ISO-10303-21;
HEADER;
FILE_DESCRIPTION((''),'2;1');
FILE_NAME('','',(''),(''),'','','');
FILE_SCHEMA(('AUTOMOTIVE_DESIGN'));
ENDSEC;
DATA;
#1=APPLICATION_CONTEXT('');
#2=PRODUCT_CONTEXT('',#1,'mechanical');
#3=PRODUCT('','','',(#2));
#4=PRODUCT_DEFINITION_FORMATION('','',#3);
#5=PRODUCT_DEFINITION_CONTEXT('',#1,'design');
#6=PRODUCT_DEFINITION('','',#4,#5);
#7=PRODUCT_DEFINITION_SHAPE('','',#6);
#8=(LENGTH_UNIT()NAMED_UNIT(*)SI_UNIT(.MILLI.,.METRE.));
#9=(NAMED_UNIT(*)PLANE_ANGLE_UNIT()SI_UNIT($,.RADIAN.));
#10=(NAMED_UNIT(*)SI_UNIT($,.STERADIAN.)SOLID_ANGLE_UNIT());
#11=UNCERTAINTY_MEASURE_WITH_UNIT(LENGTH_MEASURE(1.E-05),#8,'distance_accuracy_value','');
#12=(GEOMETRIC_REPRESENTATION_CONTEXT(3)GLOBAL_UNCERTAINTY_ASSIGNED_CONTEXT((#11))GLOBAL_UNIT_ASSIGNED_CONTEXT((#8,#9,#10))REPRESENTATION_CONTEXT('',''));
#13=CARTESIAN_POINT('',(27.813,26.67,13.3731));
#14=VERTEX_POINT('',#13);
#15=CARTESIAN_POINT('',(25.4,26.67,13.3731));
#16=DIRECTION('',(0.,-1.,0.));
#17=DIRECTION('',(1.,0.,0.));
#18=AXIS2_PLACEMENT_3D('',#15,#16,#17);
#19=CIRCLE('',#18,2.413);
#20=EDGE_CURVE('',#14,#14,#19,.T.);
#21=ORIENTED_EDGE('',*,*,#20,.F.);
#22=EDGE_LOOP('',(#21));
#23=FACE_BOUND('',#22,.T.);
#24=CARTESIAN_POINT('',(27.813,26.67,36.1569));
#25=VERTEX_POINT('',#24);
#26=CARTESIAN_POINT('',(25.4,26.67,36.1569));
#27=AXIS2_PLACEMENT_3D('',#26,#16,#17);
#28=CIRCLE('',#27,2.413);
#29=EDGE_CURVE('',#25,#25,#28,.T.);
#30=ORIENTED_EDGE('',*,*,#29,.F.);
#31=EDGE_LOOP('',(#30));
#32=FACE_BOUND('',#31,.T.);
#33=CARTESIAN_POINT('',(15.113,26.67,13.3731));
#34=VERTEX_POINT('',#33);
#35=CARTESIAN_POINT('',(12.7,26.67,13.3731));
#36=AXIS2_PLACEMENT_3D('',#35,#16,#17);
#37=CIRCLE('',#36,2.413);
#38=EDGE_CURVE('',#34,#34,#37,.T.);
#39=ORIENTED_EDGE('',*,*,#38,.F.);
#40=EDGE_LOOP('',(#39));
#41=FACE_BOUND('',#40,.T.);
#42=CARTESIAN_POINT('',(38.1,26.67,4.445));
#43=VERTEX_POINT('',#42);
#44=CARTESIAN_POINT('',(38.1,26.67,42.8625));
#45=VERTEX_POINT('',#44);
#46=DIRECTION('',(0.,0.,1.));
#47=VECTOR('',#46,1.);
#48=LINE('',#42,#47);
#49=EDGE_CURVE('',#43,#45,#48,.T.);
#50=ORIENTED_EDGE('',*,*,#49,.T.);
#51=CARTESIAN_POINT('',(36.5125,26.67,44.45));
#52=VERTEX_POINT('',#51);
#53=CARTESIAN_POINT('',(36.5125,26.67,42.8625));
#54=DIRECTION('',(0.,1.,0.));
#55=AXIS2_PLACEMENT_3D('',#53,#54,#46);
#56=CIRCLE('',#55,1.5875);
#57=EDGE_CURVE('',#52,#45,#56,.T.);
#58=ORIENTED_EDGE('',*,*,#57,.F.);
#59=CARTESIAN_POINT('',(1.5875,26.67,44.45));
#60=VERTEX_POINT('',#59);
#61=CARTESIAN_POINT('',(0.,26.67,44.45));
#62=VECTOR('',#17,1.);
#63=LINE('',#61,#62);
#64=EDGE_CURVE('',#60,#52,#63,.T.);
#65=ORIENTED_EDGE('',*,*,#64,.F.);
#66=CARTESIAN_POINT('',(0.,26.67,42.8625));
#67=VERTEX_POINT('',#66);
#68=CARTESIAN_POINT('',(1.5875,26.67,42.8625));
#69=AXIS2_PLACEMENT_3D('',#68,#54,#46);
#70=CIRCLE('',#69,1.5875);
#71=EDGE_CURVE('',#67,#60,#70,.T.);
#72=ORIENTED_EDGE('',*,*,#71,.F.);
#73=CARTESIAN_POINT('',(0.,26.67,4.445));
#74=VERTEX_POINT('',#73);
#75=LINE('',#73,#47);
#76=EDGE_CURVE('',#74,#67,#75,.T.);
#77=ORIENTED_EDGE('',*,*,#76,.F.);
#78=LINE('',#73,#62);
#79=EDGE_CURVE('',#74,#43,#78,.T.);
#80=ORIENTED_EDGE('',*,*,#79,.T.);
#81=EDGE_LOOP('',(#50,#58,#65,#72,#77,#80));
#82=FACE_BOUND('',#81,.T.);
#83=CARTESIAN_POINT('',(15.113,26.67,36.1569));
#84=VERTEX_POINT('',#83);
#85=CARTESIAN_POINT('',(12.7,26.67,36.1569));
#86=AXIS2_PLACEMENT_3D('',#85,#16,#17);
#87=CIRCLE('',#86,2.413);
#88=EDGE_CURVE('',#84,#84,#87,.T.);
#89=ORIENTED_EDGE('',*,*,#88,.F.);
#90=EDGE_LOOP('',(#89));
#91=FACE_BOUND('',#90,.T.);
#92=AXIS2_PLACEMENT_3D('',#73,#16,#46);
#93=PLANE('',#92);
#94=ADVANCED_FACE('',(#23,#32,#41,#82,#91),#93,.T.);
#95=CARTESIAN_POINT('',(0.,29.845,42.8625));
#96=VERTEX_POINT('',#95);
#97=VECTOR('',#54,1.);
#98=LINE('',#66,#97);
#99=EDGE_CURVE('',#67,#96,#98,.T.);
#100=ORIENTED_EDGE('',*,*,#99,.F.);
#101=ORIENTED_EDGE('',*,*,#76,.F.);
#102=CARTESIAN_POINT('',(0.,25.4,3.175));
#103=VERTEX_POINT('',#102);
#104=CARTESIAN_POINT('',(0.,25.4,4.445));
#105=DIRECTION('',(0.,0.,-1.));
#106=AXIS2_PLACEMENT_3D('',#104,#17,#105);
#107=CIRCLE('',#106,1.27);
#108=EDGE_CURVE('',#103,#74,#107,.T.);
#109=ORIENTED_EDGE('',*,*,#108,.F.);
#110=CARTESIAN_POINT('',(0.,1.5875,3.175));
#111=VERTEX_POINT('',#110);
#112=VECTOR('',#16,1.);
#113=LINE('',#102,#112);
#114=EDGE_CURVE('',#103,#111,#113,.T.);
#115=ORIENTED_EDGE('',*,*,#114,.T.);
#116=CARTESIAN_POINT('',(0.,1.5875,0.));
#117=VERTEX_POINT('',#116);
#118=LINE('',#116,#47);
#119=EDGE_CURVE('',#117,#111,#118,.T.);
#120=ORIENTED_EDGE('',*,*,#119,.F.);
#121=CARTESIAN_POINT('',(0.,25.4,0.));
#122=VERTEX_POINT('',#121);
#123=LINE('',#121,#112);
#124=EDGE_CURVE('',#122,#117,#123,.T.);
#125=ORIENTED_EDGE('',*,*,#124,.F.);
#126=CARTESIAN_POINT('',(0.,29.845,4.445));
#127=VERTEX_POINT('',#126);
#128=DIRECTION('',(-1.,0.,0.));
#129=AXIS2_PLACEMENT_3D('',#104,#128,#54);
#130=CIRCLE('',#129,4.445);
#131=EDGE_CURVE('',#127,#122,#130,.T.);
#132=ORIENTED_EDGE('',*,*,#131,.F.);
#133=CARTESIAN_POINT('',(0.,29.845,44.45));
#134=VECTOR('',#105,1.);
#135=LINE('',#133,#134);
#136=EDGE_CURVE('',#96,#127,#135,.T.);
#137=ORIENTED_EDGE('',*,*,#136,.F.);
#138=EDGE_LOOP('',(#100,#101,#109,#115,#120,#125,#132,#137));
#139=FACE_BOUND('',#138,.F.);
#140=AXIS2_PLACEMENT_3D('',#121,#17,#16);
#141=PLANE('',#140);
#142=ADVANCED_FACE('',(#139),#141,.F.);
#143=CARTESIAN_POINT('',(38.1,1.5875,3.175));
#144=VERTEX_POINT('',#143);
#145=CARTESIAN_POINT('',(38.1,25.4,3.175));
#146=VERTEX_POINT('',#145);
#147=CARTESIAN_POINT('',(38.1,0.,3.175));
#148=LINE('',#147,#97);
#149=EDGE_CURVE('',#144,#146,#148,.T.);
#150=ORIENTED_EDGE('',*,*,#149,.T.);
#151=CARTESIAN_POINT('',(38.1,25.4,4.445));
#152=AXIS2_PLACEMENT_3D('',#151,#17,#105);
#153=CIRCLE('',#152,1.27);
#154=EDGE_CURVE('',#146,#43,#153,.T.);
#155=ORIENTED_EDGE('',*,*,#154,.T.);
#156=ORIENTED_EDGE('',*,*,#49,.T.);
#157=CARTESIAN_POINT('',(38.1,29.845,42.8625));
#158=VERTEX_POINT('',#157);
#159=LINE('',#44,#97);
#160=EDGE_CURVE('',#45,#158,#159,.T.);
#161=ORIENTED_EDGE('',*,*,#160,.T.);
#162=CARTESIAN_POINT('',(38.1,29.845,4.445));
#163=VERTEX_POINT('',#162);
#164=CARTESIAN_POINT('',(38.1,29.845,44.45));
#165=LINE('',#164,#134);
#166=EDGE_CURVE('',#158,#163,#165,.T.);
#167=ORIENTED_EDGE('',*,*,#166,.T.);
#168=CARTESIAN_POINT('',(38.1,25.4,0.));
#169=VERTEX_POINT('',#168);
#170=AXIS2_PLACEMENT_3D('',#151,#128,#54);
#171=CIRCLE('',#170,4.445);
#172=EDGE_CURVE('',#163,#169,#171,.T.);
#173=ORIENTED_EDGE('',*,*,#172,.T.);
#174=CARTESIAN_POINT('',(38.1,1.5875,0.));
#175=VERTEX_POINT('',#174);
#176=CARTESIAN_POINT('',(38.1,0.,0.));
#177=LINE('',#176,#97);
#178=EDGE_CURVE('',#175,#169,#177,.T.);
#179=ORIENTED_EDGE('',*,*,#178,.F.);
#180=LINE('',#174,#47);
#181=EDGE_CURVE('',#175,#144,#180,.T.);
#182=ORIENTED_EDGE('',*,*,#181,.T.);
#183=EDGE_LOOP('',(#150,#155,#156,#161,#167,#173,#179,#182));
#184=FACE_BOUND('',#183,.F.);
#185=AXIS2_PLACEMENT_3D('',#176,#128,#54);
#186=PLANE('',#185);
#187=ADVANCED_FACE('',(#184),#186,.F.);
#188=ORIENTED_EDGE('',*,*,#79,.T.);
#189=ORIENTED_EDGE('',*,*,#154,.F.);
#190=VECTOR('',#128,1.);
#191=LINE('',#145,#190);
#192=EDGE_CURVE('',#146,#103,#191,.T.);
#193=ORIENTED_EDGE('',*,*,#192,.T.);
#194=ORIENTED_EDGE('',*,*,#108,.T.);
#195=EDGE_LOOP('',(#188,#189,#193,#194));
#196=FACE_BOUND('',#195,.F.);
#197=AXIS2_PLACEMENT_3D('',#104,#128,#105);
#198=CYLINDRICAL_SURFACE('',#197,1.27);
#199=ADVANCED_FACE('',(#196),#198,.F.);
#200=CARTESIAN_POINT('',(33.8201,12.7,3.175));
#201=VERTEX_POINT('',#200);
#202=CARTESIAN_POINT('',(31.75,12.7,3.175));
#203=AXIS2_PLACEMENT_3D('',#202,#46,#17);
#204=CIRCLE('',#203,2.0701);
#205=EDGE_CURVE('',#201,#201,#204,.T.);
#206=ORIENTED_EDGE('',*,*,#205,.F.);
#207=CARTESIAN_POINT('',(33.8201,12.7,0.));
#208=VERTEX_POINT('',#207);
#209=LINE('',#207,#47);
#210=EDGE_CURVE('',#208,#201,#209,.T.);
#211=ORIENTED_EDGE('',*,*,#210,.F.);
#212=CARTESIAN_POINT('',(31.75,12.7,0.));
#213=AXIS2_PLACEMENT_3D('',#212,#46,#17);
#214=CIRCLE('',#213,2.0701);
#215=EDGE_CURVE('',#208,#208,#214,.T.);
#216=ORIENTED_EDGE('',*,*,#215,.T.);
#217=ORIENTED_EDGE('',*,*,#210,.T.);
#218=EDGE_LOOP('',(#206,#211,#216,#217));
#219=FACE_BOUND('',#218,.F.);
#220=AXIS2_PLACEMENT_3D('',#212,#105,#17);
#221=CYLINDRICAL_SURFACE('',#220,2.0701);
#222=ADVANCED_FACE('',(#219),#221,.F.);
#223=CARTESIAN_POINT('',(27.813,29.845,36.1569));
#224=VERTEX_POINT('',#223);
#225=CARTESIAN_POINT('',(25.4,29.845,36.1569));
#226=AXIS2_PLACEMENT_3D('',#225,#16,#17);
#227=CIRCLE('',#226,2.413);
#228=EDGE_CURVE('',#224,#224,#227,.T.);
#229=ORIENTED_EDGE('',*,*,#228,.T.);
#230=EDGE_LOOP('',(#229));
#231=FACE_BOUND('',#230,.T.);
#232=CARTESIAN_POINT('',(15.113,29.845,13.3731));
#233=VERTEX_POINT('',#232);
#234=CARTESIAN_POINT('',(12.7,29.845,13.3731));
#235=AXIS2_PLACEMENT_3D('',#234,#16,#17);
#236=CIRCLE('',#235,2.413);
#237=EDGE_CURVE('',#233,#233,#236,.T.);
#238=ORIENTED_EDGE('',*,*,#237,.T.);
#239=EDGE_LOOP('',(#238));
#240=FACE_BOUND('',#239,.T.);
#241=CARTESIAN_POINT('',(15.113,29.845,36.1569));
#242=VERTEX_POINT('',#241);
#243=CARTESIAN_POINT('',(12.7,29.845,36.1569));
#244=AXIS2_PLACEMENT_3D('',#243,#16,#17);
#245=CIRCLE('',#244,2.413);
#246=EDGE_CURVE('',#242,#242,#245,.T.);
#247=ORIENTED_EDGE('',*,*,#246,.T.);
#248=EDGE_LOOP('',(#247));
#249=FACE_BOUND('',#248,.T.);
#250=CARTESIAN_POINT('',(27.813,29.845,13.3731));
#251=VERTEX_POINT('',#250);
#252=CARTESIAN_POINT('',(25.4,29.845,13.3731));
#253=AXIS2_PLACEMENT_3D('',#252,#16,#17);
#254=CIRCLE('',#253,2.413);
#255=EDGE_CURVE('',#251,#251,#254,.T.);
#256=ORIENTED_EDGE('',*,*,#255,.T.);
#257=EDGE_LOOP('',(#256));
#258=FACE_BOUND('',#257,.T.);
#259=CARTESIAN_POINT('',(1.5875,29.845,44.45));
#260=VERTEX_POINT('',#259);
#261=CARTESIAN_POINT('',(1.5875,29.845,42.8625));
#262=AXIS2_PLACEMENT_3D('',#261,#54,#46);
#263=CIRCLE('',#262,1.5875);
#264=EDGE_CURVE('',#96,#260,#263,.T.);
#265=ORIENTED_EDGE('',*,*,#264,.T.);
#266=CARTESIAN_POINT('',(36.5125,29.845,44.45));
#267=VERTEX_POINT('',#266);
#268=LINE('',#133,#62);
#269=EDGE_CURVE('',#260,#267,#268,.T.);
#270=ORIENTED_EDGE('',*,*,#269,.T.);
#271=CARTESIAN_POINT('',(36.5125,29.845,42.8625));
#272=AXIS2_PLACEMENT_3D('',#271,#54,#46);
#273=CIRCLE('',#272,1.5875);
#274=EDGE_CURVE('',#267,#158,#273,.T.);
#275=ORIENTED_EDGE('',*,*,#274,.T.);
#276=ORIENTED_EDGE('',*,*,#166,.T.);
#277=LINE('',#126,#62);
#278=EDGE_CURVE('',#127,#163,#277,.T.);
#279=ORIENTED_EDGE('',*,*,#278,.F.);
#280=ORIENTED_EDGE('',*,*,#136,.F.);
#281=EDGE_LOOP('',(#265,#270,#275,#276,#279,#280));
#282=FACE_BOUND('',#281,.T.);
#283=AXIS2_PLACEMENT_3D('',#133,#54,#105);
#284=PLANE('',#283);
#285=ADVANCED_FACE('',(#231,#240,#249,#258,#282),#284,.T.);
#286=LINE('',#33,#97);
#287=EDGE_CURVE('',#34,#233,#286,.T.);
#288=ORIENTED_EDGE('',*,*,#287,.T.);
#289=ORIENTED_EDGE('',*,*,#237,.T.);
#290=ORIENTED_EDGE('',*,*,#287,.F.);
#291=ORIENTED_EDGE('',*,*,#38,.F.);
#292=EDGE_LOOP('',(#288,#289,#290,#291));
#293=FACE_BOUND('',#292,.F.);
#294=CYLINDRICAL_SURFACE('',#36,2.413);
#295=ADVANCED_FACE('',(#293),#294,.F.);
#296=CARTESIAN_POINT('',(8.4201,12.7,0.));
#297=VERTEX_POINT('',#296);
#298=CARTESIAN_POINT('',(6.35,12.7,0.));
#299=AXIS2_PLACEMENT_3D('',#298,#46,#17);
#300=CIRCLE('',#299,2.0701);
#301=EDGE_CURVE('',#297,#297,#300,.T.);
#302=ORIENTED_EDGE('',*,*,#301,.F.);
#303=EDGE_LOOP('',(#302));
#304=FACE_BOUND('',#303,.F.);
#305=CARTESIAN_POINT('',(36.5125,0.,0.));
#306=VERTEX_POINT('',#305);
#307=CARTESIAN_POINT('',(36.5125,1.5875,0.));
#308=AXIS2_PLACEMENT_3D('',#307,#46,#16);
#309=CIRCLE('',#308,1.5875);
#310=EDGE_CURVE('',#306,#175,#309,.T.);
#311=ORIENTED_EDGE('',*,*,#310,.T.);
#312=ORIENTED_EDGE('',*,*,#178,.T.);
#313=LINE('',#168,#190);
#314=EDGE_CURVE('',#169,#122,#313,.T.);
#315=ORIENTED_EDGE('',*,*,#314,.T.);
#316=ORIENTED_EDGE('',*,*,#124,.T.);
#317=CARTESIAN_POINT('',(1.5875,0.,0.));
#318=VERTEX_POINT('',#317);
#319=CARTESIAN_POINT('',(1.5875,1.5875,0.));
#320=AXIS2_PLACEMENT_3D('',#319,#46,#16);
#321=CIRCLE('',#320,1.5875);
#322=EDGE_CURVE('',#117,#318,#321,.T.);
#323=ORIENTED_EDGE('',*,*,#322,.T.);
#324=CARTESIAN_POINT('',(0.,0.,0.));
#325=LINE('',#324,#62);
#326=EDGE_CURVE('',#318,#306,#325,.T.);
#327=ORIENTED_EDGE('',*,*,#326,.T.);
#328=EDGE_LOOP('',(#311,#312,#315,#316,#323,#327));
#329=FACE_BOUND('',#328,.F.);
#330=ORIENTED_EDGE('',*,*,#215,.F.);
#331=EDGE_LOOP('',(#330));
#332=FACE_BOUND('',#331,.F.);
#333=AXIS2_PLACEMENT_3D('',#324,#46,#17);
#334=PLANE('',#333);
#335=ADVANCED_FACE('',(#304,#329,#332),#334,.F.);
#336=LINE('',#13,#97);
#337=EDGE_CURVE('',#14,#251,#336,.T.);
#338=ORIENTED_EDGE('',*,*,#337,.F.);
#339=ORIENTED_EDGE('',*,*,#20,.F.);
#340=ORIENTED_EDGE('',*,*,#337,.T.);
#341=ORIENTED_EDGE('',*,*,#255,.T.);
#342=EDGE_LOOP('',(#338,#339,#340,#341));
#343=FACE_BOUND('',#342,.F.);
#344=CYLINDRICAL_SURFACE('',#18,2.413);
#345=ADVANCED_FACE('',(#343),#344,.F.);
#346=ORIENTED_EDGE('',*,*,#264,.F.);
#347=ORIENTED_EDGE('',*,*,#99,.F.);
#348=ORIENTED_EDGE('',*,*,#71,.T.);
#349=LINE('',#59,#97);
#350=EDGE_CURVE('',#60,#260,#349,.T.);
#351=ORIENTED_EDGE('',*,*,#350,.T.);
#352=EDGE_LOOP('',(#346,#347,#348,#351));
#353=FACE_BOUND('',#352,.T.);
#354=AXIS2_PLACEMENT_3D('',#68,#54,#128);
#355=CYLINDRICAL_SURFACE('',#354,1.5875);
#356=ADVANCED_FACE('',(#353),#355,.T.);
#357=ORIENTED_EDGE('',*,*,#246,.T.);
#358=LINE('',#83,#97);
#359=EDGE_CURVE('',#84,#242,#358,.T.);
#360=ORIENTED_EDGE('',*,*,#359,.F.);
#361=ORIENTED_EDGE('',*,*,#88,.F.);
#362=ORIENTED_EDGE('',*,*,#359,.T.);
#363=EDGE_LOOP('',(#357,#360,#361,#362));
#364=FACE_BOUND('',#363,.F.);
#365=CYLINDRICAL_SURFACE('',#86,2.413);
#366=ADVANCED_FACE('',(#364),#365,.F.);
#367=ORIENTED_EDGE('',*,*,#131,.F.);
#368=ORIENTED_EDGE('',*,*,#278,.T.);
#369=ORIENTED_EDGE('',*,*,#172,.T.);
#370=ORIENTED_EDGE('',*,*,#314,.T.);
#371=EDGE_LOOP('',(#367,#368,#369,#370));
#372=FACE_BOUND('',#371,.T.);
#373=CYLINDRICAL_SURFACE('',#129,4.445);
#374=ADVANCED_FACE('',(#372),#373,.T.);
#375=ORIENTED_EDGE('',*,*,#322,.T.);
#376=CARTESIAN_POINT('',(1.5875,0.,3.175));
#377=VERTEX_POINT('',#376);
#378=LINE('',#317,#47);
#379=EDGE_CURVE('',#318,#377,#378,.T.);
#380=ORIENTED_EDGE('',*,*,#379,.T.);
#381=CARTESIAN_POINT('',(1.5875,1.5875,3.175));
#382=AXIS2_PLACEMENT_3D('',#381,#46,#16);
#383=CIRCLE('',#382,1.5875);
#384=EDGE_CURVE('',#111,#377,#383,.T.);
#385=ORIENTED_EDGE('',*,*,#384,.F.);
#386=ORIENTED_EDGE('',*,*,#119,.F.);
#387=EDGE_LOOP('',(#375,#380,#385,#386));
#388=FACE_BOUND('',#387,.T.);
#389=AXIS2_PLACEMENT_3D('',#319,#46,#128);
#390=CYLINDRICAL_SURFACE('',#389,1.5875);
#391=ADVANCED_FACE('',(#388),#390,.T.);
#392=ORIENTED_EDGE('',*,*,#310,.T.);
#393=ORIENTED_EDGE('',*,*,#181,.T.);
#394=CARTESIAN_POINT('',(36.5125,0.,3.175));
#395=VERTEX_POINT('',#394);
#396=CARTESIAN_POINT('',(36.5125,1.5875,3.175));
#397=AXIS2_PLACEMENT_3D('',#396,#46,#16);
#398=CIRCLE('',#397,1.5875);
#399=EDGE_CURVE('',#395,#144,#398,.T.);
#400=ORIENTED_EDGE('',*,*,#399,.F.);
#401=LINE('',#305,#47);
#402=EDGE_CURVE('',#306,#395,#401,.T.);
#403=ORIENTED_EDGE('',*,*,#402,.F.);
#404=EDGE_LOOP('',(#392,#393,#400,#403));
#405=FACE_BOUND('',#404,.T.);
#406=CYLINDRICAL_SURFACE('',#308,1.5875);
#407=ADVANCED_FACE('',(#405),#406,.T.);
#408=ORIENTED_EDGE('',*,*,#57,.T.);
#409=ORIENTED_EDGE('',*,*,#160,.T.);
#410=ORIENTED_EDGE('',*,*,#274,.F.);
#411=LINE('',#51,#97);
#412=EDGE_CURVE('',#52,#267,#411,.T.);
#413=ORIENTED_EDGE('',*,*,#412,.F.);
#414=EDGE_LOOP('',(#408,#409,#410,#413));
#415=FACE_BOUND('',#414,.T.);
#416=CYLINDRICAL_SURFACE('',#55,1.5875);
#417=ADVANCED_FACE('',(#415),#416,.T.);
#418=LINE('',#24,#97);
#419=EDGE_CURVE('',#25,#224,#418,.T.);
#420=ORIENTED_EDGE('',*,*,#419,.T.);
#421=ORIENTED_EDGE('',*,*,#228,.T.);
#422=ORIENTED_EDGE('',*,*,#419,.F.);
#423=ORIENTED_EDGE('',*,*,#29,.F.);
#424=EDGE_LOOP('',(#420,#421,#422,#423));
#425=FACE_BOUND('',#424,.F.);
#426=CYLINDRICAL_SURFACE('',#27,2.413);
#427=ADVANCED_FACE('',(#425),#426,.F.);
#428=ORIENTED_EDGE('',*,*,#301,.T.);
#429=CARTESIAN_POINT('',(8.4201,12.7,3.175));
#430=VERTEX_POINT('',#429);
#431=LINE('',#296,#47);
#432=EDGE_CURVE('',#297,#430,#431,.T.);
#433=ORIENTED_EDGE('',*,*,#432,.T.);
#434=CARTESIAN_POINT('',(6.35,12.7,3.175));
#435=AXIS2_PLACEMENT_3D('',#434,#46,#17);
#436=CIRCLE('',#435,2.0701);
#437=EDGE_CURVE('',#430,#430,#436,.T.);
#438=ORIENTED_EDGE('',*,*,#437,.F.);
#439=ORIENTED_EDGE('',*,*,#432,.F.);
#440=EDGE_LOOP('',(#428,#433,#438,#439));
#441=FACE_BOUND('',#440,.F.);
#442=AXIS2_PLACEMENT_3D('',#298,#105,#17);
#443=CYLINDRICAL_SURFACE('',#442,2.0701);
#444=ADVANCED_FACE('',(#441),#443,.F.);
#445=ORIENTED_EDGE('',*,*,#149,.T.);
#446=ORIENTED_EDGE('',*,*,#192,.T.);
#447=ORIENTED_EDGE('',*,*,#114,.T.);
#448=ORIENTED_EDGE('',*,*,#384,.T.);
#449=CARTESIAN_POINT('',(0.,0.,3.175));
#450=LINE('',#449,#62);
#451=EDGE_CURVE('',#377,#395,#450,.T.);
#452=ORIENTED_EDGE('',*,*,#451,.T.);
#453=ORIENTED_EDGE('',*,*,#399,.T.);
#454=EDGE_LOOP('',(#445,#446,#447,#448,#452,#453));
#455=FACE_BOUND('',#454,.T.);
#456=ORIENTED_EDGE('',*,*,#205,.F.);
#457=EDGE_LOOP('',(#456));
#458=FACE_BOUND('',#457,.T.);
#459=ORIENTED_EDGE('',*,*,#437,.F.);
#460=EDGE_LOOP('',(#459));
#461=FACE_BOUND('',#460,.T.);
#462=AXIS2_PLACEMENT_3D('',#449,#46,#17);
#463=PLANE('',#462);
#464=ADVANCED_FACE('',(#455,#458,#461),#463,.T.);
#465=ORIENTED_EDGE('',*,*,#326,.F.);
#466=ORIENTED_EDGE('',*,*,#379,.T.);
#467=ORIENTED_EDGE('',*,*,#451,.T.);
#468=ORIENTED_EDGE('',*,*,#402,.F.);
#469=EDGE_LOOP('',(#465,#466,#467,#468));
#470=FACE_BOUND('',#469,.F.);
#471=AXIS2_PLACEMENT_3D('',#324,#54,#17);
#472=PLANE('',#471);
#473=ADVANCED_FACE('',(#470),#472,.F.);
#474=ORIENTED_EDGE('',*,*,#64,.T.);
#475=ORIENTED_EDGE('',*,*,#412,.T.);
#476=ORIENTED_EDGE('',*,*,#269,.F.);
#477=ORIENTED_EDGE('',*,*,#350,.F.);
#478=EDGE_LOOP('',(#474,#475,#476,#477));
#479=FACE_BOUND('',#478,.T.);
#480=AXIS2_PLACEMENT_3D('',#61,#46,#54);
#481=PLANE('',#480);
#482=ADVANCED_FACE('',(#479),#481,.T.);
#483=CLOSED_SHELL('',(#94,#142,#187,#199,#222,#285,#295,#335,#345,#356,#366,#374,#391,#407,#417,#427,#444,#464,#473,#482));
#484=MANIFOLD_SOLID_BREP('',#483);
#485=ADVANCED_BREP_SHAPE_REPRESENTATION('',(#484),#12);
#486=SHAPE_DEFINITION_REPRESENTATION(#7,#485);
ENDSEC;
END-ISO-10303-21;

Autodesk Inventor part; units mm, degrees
ref_plane "YZ Plane" through (0, 0, 0) normal (1, 0, 0) x (0, 1, 0)
ref_plane "XZ Plane" through (0, 0, 0) normal (0, 1, 0) x (-1, 0, 0)
ref_plane "XY Plane" through (0, 0, 0) normal (0, 0, 1) x (1, 0, 0)
sketch "Sketch1" plane through (0, 0, 0) normal (0, 0, 1) x (1, 0, 0)
  line L0 (0, 0) -> (38.1, 0)
  line L1 (38.1, 0) -> (38.1, 25.4)
  line L2 (38.1, 25.4) -> (0, 25.4)
  line L3 (0, 25.4) -> (0, 0)
  circle A0 centre (6.35, 12.7) radius 2.0701
  line L4 (0, 12.7) -> (38.1, 12.7) construction
  circle A1 centre (31.75, 12.7) radius 2.0701
  dimension "d0" = 38.1
  dimension "d1" = 25.4
  dimension "d2" = 4.1402
  dimension "d3" = 6.35
  dimension "d6" = 25.4
extrude "Plate1" add sketch "Sketch1" along normal blind 3.175
sketch "Sketch2" plane through (0, 26.67, 4.445) normal (0, 1, 0) x (-1, 0, 0)
  line L0 (-38.1, 0) -> (0, 0)
  line L1 (0, 0) -> (0, 40.005)
  line L2 (0, 40.005) -> (-38.1, 40.005)
  line L3 (-38.1, 40.005) -> (-38.1, 0)
edge flange "Flange1" height 44.45 angle 90 thickness 3.175 bend radius 1.27 thickness toward (0, 1, 0) relief tear relief width 3.175 relief depth 1.5875 edges at (19.05, 25.4, 3.175) wall of the first edge with corners at (38.1, 26.67, 4.445) (0, 26.67, 4.445) (0, 26.67, 44.45) (38.1, 26.67, 44.45)
bend "Bend1"
corner "Corner1"
fillet "Fillet1" radius 1.5875 4 edges at (38.1, 0, 1.5875) (0, 0, 1.5875) (38.1, 28.2575, 44.45) (0, 28.2575, 44.45)
sketch "Sketch3" plane through (0, 26.67, 4.445) normal (0, -1, 0) x (1, 0, 0)
  line L0 (0, 38.4175) -> (0, 0) projected
  line L1 (0, 0) -> (38.1, 0) projected
  line L2 (9.525, 37.465) -> (28.575, 37.465) construction
  line L3 (28.575, 37.465) -> (28.575, 3.175) construction
  line L4 (28.575, 3.175) -> (9.525, 3.175) construction
  line L5 (9.525, 3.175) -> (9.525, 37.465) construction
  circle A0 centre (25.4, 31.7119) radius 2.413
  line L6 (19.05, 37.465) -> (19.05, 3.175) construction
  line L7 (9.525, 20.32) -> (28.575, 20.32) construction
  circle A1 centre (12.7, 31.7119) radius 2.413
  circle A2 centre (25.4, 8.9281) radius 2.413
  circle A3 centre (12.7, 8.9281) radius 2.413
  point P0 (0, -4.445)
  dimension "d23" = 34.29
  dimension "d24" = 19.05
  dimension "d25" = 3.175
  dimension "d26" = 9.525
  dimension "d27" = 4.826
  dimension "d28" = 3.175
  dimension "d29" = 5.7531
extrude "Extrusion1" cut sketch "Sketch3" against normal blind 25.4
equation "\"d12\" = BendReliefWidth"
equation "\"d13\" = BendReliefDepth"
equation "\"d14\" = MinimumRemnant"
equation "\"d15\" = BendRadius"
equation "\"d19\" = CornerReliefSize"
equation "\"d20\" = GapSize"
equation "\"d21\" = JacobiRadiusSize"
equation "\"BendRadius\" = Thickness"
equation "\"BendReliefWidth\" = Thickness"
equation "\"BendReliefDepth\" = 0.5 * Thickness"
equation "\"CornerReliefSize\" = 4 * Thickness"
equation "\"MinimumRemnant\" = 2 * Thickness"
equation "\"TransitionRadius\" = BendRadius"
equation "\"JacobiRadiusSize\" = BendRadius"
equation "\"GapSize\" = Thickness"
equation "\"d11\" = BendRadius"
equation "\"Thickness\" = 3.175"
properties part number "Pneumatic Piston Back Flange (Custom)" material "Aluminum 6061"
